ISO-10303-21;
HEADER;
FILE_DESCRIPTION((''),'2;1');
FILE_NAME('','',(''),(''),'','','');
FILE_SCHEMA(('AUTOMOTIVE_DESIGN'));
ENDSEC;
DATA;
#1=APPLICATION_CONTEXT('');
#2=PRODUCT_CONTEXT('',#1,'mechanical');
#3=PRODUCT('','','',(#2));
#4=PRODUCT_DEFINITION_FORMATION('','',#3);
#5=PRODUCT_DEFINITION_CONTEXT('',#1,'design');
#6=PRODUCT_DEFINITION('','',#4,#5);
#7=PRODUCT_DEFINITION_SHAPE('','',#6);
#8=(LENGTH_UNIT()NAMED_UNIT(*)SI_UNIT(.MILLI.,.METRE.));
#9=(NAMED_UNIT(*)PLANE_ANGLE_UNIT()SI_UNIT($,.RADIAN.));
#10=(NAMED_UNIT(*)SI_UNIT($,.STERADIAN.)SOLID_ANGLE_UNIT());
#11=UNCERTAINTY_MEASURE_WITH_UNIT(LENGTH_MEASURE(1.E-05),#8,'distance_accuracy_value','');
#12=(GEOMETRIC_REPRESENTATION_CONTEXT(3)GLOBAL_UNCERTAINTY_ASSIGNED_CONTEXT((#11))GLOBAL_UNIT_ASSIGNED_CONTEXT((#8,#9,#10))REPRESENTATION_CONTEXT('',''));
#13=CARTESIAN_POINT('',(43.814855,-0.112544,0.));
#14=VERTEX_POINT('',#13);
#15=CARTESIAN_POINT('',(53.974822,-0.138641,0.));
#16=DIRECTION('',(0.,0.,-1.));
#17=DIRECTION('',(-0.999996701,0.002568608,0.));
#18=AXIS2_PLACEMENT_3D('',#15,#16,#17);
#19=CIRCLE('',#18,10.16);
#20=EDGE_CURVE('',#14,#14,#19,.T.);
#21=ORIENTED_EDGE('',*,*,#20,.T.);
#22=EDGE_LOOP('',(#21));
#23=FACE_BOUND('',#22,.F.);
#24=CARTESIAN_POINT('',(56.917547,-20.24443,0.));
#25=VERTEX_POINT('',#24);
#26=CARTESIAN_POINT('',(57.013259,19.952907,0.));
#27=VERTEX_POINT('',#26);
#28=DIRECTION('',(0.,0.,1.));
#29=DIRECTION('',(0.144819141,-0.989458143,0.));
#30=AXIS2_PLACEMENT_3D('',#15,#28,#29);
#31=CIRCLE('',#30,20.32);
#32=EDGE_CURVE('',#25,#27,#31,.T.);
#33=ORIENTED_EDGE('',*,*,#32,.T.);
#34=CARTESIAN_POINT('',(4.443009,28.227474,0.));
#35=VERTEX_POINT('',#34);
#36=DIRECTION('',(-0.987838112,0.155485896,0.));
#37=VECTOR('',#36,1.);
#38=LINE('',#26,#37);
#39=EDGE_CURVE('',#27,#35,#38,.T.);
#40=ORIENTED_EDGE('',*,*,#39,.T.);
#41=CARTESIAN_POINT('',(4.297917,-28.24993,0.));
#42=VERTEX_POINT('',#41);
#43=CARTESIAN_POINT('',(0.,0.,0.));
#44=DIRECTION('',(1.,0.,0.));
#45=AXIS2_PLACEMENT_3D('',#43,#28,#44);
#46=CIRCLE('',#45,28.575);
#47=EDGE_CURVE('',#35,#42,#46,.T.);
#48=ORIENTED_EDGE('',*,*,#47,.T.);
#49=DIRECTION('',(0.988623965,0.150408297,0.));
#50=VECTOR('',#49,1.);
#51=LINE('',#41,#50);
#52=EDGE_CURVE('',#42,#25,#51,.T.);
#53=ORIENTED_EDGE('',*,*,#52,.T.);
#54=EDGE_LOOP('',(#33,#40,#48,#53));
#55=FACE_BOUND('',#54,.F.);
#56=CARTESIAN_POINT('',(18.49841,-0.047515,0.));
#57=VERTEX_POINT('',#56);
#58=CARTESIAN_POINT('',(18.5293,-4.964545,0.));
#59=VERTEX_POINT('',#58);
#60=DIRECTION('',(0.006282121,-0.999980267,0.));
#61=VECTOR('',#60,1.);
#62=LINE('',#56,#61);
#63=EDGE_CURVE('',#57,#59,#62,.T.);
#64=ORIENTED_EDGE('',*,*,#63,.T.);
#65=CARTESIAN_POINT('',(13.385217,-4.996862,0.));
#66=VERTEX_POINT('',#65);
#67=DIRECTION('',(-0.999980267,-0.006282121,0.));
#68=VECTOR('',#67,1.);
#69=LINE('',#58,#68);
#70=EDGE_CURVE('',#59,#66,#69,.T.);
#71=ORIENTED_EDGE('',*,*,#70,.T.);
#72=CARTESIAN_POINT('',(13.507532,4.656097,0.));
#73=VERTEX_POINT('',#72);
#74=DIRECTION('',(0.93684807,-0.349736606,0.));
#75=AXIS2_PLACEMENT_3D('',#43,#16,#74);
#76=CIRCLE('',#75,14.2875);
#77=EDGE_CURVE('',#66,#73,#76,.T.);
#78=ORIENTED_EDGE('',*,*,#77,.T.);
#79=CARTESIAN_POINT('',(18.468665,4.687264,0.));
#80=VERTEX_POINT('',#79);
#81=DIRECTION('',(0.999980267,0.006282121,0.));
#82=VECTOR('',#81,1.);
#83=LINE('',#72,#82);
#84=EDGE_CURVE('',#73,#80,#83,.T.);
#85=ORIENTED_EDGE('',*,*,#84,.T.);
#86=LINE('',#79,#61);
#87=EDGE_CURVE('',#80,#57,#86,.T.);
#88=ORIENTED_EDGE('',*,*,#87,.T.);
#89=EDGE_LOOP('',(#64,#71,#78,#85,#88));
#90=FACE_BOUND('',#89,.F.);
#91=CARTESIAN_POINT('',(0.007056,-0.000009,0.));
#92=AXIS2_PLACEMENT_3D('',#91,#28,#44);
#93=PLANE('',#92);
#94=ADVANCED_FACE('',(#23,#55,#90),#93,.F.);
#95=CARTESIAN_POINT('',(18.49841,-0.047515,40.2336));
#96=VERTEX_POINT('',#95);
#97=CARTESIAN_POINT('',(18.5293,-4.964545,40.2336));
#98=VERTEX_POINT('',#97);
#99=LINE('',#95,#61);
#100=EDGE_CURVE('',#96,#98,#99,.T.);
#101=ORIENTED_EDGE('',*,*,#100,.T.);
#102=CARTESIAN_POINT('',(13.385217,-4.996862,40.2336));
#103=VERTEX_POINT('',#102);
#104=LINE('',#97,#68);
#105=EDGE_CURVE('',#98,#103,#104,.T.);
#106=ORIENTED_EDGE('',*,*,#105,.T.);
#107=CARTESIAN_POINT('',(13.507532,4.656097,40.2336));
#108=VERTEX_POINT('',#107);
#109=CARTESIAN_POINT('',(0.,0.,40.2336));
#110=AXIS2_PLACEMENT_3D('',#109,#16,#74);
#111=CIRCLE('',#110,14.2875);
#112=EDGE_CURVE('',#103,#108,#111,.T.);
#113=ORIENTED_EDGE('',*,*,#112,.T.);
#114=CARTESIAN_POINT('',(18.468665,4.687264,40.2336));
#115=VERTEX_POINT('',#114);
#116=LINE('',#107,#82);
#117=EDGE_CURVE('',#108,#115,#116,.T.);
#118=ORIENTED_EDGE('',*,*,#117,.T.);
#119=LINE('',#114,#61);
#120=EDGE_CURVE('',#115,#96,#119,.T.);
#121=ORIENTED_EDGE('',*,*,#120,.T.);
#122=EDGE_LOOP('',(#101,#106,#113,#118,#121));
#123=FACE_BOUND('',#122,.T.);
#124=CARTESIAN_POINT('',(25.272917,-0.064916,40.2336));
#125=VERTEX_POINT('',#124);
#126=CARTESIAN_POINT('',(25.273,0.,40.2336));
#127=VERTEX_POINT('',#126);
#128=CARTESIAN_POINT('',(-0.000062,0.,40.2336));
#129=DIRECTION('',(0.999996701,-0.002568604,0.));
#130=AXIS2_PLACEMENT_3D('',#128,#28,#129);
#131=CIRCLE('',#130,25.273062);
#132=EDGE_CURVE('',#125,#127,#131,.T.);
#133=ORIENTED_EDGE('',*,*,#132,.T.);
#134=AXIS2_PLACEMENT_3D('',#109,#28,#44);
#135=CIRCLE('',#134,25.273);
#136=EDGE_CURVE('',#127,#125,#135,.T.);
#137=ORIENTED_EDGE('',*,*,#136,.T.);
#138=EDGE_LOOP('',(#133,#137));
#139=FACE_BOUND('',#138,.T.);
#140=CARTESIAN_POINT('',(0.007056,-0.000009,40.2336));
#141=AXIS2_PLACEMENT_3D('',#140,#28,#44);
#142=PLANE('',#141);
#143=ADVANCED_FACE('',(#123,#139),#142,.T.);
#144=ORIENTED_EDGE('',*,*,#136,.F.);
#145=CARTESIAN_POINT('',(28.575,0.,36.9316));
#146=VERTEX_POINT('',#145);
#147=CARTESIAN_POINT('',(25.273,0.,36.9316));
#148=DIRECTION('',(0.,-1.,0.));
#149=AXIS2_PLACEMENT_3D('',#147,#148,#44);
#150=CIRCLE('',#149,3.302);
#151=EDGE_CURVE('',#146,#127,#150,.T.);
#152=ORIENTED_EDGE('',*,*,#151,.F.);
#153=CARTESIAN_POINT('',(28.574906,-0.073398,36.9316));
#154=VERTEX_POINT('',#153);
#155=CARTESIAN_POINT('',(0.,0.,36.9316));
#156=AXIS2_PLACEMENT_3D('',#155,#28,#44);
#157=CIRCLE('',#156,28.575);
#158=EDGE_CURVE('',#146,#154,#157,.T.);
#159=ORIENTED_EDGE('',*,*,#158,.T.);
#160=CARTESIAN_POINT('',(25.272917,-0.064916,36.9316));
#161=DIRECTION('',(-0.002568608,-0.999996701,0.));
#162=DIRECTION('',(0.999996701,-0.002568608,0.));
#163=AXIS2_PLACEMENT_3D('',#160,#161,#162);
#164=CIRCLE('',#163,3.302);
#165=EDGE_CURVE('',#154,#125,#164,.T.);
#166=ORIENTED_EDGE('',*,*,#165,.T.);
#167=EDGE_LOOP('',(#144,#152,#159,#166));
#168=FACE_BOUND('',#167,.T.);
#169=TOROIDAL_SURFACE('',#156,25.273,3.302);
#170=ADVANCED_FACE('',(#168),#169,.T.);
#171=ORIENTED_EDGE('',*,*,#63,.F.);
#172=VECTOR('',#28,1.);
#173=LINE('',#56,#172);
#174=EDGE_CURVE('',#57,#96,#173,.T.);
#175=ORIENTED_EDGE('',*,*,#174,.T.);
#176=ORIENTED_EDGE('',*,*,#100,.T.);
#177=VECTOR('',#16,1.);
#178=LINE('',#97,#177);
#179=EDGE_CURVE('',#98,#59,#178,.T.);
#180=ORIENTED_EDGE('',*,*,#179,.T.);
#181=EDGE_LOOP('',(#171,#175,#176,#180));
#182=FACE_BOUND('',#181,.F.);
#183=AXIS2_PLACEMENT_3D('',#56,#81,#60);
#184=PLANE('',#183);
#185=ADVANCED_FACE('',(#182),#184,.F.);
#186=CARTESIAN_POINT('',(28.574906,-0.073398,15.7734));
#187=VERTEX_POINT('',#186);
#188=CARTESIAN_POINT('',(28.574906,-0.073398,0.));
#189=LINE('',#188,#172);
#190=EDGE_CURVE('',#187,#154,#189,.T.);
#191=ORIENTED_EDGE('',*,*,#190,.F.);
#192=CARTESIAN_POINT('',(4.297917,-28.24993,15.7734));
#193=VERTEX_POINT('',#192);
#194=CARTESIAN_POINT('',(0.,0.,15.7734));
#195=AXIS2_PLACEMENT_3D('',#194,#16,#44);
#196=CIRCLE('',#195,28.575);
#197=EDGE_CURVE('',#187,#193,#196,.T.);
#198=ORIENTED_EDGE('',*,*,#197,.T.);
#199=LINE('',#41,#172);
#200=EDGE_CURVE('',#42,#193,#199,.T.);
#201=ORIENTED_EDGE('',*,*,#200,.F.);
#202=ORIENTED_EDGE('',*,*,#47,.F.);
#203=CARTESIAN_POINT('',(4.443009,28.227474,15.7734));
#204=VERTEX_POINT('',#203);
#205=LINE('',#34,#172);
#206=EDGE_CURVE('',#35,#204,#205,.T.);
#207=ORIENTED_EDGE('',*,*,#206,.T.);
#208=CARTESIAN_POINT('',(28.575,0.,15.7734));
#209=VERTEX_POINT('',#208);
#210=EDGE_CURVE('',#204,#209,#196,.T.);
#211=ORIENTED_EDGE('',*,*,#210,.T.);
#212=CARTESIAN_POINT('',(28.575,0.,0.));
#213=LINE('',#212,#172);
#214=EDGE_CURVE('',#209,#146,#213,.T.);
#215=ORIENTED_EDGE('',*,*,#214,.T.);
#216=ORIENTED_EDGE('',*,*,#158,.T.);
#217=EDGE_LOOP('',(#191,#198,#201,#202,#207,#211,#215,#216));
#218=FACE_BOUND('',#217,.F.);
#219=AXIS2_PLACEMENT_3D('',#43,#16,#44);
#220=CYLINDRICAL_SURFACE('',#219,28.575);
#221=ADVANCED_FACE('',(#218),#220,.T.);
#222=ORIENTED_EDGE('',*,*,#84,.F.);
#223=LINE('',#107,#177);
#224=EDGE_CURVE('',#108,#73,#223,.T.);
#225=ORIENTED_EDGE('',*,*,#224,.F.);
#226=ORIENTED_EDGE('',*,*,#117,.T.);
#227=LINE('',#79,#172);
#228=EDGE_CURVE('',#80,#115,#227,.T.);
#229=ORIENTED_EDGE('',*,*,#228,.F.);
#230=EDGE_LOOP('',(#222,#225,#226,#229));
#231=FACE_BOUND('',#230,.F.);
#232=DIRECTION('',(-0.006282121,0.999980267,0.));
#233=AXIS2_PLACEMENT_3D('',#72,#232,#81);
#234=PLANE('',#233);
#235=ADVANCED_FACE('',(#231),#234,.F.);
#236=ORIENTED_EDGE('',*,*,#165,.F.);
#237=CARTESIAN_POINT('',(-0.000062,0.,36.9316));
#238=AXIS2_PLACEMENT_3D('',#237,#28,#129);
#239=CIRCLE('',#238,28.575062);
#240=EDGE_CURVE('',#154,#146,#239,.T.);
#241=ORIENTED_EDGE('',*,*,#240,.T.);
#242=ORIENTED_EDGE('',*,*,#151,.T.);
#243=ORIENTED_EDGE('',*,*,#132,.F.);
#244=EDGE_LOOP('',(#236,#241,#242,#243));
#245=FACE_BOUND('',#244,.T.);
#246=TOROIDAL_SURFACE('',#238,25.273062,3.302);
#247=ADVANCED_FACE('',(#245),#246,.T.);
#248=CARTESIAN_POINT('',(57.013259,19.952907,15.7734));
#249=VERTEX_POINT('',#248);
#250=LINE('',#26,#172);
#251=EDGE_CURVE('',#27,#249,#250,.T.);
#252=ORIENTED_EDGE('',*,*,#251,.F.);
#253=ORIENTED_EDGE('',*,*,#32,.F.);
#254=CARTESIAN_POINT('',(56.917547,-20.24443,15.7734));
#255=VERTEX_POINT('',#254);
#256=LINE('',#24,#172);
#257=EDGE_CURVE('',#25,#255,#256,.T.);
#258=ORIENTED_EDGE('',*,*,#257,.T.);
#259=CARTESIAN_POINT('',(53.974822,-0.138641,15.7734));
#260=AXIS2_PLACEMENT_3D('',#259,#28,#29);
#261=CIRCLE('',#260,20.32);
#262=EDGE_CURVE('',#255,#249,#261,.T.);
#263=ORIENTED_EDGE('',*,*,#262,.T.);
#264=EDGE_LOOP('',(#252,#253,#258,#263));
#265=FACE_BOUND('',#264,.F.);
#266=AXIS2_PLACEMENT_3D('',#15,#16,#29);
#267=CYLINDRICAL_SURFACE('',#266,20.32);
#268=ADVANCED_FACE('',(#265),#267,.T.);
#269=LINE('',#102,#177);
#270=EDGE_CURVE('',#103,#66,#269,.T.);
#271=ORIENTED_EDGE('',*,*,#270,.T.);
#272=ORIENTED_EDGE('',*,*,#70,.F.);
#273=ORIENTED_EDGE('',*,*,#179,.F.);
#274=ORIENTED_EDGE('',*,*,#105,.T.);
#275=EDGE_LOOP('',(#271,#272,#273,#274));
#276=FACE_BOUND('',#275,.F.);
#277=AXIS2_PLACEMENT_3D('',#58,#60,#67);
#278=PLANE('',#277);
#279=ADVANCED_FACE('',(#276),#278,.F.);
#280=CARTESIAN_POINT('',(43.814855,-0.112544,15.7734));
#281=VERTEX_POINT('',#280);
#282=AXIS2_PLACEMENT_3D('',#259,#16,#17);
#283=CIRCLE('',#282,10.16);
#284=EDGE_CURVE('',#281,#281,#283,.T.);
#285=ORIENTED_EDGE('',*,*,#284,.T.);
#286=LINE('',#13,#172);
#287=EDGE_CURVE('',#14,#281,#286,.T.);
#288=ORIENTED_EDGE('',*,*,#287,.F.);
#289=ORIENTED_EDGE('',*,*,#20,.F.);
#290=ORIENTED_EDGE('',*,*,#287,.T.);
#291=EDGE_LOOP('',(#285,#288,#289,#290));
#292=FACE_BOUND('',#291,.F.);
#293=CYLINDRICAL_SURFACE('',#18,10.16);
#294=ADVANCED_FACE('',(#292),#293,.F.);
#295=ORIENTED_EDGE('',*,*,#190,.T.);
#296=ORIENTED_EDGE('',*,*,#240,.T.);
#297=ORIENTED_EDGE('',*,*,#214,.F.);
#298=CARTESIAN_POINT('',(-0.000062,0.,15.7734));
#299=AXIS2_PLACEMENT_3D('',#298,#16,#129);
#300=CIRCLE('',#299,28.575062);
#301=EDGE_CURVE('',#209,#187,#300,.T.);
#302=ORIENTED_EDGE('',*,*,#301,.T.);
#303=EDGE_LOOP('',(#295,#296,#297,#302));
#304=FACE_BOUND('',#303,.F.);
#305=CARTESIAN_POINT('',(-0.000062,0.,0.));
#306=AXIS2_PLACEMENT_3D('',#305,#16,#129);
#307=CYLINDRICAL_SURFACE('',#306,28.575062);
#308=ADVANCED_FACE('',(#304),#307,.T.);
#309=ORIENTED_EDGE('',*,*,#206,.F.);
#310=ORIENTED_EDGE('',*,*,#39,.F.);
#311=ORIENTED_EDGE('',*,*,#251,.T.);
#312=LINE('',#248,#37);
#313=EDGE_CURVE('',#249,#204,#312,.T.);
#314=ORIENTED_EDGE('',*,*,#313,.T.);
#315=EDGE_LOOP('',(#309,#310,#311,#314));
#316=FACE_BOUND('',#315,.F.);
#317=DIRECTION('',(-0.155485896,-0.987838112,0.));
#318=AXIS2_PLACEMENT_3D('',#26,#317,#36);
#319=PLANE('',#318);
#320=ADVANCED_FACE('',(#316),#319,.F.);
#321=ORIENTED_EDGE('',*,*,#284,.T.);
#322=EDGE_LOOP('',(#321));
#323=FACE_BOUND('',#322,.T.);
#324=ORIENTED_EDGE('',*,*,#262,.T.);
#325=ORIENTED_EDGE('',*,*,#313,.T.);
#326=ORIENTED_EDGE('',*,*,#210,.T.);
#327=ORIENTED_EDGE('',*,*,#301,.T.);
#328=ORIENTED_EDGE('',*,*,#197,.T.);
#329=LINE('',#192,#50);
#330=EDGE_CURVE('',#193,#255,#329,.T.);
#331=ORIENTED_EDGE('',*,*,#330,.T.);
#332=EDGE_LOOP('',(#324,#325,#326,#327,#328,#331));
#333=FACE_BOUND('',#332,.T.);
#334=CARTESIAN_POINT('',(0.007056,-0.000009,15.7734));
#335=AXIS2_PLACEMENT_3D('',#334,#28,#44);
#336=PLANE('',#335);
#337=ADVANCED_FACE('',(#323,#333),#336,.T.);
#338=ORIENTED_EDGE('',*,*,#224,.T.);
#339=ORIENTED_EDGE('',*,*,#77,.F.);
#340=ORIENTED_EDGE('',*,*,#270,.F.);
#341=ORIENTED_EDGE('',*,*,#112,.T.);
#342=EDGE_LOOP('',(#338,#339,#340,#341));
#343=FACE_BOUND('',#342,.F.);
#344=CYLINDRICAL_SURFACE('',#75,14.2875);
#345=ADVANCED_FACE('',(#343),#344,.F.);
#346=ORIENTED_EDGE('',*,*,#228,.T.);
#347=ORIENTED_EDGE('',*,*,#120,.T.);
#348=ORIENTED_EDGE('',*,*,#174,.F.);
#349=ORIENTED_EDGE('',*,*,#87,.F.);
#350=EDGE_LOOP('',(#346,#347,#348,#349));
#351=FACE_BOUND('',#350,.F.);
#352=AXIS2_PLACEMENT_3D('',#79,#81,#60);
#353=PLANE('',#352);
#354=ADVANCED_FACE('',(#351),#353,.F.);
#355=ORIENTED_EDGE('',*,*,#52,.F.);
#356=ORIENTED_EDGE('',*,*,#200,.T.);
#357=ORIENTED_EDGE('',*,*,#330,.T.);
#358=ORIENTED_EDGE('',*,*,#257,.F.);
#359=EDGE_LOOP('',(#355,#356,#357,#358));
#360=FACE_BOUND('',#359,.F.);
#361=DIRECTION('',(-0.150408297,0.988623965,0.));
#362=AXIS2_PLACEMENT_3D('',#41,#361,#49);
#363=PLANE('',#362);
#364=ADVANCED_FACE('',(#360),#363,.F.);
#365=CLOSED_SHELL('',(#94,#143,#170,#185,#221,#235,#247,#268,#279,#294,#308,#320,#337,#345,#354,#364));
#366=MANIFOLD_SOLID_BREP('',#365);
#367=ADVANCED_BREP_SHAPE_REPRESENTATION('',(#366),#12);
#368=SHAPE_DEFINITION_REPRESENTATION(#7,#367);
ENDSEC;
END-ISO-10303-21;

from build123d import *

# Parameters (mm, degrees)
F1_DEPTH = 15.7734
F2_DEPTH = 40.2336
F3_R     = 3.302


# Not quite as in the source:
# - a feature names something its author has since deleted; it is built from what else it names


with BuildPart() as f1:
    # F0 (on Top) → F1 (new body)
    with BuildSketch(Plane.XY):
        with BuildLine():
            ThreePointArc((28.5749057346, -0.0733979643), (28.5749764336, -0.0366990124), (28.575, 0))
            ThreePointArc((28.575, 0), (21.7196871584, 18.5684090525), (4.4430094671, 28.2274740612))
            ThreePointArc((4.4430094671, 28.2274740612), (-28.5749057039, 0.0734099128), (4.2979170796, -28.2499298013))
            ThreePointArc((4.2979170796, -28.2499298013), (21.6479758068, -18.6519641987), (28.5749057346, -0.0733979643))
        make_face()
        with BuildLine():
            Line((18.4686649637, 4.6872641706), (18.4984100104, -0.0475153147))
            Line((18.4984100104, -0.0475153147), (18.5293, -4.9645453691))
            Line((18.5293, -4.9645453691), (13.3852167998, -4.9968617623))
            ThreePointArc((13.3852167998, -4.9968617623), (-14.2863531341, 0.1810259026), (13.5075318215, 4.6560971147))
            Line((13.5075318215, 4.6560971147), (18.4686649637, 4.6872641706))
        make_face(mode=Mode.SUBTRACT)
        with BuildLine():
            ThreePointArc((4.4430094671, 28.2274740612), (21.7196871584, 18.5684090525), (28.575, 0))
            ThreePointArc((28.575, 0), (28.5749764336, -0.0366990124), (28.5749057346, -0.0733979643))
            ThreePointArc((28.5749057346, -0.0733979643), (21.6479758068, -18.6519641987), (4.2979170796, -28.2499298013))
            Line((4.2979170796, -28.2499298013), (56.9175468923, -20.2444300608))
            ThreePointArc((56.9175468923, -20.2444300608), (74.2947643422, -0.1870234197), (57.0132588055, 19.9529074106))
            Line((57.0132588055, 19.9529074106), (4.4430094671, 28.2274740612))
        make_face()
        with BuildLine():
            ThreePointArc((64.1348219431, -0.1386405993), (53.9617734053, -10.2986322201), (43.8148554597, -0.1125435453))
            ThreePointArc((43.8148554597, -0.1125435453), (53.9878704808, 10.0213510216), (64.1348219431, -0.1386405993))
        make_face(mode=Mode.SUBTRACT)
    extrude(amount=F1_DEPTH)

    # F0 (on Top) → F2 (join)
    with BuildSketch(Plane.XY):
        with BuildLine():
            ThreePointArc((28.5749057346, -0.0733979643), (28.5749764336, -0.0366990124), (28.575, 0))
            ThreePointArc((28.575, 0), (21.7196871584, 18.5684090525), (4.4430094671, 28.2274740612))
            ThreePointArc((4.4430094671, 28.2274740612), (-28.5749057039, 0.0734099128), (4.2979170796, -28.2499298013))
            ThreePointArc((4.2979170796, -28.2499298013), (21.6479758068, -18.6519641987), (28.5749057346, -0.0733979643))
        make_face()
        with BuildLine():
            Line((18.4686649637, 4.6872641706), (18.4984100104, -0.0475153147))
            Line((18.4984100104, -0.0475153147), (18.5293, -4.9645453691))
            Line((18.5293, -4.9645453691), (13.3852167998, -4.9968617623))
            ThreePointArc((13.3852167998, -4.9968617623), (-14.2863531341, 0.1810259026), (13.5075318215, 4.6560971147))
            Line((13.5075318215, 4.6560971147), (18.4686649637, 4.6872641706))
        make_face(mode=Mode.SUBTRACT)
    extrude(amount=F2_DEPTH)

    # F3
    f3_edges = [f1.edges().sort_by_distance(p)[0] for p in [
        (-4.297917, 28.24993, 40.2336),
    ]]
    fillet(f3_edges, radius=F3_R)


solid = f1.part
